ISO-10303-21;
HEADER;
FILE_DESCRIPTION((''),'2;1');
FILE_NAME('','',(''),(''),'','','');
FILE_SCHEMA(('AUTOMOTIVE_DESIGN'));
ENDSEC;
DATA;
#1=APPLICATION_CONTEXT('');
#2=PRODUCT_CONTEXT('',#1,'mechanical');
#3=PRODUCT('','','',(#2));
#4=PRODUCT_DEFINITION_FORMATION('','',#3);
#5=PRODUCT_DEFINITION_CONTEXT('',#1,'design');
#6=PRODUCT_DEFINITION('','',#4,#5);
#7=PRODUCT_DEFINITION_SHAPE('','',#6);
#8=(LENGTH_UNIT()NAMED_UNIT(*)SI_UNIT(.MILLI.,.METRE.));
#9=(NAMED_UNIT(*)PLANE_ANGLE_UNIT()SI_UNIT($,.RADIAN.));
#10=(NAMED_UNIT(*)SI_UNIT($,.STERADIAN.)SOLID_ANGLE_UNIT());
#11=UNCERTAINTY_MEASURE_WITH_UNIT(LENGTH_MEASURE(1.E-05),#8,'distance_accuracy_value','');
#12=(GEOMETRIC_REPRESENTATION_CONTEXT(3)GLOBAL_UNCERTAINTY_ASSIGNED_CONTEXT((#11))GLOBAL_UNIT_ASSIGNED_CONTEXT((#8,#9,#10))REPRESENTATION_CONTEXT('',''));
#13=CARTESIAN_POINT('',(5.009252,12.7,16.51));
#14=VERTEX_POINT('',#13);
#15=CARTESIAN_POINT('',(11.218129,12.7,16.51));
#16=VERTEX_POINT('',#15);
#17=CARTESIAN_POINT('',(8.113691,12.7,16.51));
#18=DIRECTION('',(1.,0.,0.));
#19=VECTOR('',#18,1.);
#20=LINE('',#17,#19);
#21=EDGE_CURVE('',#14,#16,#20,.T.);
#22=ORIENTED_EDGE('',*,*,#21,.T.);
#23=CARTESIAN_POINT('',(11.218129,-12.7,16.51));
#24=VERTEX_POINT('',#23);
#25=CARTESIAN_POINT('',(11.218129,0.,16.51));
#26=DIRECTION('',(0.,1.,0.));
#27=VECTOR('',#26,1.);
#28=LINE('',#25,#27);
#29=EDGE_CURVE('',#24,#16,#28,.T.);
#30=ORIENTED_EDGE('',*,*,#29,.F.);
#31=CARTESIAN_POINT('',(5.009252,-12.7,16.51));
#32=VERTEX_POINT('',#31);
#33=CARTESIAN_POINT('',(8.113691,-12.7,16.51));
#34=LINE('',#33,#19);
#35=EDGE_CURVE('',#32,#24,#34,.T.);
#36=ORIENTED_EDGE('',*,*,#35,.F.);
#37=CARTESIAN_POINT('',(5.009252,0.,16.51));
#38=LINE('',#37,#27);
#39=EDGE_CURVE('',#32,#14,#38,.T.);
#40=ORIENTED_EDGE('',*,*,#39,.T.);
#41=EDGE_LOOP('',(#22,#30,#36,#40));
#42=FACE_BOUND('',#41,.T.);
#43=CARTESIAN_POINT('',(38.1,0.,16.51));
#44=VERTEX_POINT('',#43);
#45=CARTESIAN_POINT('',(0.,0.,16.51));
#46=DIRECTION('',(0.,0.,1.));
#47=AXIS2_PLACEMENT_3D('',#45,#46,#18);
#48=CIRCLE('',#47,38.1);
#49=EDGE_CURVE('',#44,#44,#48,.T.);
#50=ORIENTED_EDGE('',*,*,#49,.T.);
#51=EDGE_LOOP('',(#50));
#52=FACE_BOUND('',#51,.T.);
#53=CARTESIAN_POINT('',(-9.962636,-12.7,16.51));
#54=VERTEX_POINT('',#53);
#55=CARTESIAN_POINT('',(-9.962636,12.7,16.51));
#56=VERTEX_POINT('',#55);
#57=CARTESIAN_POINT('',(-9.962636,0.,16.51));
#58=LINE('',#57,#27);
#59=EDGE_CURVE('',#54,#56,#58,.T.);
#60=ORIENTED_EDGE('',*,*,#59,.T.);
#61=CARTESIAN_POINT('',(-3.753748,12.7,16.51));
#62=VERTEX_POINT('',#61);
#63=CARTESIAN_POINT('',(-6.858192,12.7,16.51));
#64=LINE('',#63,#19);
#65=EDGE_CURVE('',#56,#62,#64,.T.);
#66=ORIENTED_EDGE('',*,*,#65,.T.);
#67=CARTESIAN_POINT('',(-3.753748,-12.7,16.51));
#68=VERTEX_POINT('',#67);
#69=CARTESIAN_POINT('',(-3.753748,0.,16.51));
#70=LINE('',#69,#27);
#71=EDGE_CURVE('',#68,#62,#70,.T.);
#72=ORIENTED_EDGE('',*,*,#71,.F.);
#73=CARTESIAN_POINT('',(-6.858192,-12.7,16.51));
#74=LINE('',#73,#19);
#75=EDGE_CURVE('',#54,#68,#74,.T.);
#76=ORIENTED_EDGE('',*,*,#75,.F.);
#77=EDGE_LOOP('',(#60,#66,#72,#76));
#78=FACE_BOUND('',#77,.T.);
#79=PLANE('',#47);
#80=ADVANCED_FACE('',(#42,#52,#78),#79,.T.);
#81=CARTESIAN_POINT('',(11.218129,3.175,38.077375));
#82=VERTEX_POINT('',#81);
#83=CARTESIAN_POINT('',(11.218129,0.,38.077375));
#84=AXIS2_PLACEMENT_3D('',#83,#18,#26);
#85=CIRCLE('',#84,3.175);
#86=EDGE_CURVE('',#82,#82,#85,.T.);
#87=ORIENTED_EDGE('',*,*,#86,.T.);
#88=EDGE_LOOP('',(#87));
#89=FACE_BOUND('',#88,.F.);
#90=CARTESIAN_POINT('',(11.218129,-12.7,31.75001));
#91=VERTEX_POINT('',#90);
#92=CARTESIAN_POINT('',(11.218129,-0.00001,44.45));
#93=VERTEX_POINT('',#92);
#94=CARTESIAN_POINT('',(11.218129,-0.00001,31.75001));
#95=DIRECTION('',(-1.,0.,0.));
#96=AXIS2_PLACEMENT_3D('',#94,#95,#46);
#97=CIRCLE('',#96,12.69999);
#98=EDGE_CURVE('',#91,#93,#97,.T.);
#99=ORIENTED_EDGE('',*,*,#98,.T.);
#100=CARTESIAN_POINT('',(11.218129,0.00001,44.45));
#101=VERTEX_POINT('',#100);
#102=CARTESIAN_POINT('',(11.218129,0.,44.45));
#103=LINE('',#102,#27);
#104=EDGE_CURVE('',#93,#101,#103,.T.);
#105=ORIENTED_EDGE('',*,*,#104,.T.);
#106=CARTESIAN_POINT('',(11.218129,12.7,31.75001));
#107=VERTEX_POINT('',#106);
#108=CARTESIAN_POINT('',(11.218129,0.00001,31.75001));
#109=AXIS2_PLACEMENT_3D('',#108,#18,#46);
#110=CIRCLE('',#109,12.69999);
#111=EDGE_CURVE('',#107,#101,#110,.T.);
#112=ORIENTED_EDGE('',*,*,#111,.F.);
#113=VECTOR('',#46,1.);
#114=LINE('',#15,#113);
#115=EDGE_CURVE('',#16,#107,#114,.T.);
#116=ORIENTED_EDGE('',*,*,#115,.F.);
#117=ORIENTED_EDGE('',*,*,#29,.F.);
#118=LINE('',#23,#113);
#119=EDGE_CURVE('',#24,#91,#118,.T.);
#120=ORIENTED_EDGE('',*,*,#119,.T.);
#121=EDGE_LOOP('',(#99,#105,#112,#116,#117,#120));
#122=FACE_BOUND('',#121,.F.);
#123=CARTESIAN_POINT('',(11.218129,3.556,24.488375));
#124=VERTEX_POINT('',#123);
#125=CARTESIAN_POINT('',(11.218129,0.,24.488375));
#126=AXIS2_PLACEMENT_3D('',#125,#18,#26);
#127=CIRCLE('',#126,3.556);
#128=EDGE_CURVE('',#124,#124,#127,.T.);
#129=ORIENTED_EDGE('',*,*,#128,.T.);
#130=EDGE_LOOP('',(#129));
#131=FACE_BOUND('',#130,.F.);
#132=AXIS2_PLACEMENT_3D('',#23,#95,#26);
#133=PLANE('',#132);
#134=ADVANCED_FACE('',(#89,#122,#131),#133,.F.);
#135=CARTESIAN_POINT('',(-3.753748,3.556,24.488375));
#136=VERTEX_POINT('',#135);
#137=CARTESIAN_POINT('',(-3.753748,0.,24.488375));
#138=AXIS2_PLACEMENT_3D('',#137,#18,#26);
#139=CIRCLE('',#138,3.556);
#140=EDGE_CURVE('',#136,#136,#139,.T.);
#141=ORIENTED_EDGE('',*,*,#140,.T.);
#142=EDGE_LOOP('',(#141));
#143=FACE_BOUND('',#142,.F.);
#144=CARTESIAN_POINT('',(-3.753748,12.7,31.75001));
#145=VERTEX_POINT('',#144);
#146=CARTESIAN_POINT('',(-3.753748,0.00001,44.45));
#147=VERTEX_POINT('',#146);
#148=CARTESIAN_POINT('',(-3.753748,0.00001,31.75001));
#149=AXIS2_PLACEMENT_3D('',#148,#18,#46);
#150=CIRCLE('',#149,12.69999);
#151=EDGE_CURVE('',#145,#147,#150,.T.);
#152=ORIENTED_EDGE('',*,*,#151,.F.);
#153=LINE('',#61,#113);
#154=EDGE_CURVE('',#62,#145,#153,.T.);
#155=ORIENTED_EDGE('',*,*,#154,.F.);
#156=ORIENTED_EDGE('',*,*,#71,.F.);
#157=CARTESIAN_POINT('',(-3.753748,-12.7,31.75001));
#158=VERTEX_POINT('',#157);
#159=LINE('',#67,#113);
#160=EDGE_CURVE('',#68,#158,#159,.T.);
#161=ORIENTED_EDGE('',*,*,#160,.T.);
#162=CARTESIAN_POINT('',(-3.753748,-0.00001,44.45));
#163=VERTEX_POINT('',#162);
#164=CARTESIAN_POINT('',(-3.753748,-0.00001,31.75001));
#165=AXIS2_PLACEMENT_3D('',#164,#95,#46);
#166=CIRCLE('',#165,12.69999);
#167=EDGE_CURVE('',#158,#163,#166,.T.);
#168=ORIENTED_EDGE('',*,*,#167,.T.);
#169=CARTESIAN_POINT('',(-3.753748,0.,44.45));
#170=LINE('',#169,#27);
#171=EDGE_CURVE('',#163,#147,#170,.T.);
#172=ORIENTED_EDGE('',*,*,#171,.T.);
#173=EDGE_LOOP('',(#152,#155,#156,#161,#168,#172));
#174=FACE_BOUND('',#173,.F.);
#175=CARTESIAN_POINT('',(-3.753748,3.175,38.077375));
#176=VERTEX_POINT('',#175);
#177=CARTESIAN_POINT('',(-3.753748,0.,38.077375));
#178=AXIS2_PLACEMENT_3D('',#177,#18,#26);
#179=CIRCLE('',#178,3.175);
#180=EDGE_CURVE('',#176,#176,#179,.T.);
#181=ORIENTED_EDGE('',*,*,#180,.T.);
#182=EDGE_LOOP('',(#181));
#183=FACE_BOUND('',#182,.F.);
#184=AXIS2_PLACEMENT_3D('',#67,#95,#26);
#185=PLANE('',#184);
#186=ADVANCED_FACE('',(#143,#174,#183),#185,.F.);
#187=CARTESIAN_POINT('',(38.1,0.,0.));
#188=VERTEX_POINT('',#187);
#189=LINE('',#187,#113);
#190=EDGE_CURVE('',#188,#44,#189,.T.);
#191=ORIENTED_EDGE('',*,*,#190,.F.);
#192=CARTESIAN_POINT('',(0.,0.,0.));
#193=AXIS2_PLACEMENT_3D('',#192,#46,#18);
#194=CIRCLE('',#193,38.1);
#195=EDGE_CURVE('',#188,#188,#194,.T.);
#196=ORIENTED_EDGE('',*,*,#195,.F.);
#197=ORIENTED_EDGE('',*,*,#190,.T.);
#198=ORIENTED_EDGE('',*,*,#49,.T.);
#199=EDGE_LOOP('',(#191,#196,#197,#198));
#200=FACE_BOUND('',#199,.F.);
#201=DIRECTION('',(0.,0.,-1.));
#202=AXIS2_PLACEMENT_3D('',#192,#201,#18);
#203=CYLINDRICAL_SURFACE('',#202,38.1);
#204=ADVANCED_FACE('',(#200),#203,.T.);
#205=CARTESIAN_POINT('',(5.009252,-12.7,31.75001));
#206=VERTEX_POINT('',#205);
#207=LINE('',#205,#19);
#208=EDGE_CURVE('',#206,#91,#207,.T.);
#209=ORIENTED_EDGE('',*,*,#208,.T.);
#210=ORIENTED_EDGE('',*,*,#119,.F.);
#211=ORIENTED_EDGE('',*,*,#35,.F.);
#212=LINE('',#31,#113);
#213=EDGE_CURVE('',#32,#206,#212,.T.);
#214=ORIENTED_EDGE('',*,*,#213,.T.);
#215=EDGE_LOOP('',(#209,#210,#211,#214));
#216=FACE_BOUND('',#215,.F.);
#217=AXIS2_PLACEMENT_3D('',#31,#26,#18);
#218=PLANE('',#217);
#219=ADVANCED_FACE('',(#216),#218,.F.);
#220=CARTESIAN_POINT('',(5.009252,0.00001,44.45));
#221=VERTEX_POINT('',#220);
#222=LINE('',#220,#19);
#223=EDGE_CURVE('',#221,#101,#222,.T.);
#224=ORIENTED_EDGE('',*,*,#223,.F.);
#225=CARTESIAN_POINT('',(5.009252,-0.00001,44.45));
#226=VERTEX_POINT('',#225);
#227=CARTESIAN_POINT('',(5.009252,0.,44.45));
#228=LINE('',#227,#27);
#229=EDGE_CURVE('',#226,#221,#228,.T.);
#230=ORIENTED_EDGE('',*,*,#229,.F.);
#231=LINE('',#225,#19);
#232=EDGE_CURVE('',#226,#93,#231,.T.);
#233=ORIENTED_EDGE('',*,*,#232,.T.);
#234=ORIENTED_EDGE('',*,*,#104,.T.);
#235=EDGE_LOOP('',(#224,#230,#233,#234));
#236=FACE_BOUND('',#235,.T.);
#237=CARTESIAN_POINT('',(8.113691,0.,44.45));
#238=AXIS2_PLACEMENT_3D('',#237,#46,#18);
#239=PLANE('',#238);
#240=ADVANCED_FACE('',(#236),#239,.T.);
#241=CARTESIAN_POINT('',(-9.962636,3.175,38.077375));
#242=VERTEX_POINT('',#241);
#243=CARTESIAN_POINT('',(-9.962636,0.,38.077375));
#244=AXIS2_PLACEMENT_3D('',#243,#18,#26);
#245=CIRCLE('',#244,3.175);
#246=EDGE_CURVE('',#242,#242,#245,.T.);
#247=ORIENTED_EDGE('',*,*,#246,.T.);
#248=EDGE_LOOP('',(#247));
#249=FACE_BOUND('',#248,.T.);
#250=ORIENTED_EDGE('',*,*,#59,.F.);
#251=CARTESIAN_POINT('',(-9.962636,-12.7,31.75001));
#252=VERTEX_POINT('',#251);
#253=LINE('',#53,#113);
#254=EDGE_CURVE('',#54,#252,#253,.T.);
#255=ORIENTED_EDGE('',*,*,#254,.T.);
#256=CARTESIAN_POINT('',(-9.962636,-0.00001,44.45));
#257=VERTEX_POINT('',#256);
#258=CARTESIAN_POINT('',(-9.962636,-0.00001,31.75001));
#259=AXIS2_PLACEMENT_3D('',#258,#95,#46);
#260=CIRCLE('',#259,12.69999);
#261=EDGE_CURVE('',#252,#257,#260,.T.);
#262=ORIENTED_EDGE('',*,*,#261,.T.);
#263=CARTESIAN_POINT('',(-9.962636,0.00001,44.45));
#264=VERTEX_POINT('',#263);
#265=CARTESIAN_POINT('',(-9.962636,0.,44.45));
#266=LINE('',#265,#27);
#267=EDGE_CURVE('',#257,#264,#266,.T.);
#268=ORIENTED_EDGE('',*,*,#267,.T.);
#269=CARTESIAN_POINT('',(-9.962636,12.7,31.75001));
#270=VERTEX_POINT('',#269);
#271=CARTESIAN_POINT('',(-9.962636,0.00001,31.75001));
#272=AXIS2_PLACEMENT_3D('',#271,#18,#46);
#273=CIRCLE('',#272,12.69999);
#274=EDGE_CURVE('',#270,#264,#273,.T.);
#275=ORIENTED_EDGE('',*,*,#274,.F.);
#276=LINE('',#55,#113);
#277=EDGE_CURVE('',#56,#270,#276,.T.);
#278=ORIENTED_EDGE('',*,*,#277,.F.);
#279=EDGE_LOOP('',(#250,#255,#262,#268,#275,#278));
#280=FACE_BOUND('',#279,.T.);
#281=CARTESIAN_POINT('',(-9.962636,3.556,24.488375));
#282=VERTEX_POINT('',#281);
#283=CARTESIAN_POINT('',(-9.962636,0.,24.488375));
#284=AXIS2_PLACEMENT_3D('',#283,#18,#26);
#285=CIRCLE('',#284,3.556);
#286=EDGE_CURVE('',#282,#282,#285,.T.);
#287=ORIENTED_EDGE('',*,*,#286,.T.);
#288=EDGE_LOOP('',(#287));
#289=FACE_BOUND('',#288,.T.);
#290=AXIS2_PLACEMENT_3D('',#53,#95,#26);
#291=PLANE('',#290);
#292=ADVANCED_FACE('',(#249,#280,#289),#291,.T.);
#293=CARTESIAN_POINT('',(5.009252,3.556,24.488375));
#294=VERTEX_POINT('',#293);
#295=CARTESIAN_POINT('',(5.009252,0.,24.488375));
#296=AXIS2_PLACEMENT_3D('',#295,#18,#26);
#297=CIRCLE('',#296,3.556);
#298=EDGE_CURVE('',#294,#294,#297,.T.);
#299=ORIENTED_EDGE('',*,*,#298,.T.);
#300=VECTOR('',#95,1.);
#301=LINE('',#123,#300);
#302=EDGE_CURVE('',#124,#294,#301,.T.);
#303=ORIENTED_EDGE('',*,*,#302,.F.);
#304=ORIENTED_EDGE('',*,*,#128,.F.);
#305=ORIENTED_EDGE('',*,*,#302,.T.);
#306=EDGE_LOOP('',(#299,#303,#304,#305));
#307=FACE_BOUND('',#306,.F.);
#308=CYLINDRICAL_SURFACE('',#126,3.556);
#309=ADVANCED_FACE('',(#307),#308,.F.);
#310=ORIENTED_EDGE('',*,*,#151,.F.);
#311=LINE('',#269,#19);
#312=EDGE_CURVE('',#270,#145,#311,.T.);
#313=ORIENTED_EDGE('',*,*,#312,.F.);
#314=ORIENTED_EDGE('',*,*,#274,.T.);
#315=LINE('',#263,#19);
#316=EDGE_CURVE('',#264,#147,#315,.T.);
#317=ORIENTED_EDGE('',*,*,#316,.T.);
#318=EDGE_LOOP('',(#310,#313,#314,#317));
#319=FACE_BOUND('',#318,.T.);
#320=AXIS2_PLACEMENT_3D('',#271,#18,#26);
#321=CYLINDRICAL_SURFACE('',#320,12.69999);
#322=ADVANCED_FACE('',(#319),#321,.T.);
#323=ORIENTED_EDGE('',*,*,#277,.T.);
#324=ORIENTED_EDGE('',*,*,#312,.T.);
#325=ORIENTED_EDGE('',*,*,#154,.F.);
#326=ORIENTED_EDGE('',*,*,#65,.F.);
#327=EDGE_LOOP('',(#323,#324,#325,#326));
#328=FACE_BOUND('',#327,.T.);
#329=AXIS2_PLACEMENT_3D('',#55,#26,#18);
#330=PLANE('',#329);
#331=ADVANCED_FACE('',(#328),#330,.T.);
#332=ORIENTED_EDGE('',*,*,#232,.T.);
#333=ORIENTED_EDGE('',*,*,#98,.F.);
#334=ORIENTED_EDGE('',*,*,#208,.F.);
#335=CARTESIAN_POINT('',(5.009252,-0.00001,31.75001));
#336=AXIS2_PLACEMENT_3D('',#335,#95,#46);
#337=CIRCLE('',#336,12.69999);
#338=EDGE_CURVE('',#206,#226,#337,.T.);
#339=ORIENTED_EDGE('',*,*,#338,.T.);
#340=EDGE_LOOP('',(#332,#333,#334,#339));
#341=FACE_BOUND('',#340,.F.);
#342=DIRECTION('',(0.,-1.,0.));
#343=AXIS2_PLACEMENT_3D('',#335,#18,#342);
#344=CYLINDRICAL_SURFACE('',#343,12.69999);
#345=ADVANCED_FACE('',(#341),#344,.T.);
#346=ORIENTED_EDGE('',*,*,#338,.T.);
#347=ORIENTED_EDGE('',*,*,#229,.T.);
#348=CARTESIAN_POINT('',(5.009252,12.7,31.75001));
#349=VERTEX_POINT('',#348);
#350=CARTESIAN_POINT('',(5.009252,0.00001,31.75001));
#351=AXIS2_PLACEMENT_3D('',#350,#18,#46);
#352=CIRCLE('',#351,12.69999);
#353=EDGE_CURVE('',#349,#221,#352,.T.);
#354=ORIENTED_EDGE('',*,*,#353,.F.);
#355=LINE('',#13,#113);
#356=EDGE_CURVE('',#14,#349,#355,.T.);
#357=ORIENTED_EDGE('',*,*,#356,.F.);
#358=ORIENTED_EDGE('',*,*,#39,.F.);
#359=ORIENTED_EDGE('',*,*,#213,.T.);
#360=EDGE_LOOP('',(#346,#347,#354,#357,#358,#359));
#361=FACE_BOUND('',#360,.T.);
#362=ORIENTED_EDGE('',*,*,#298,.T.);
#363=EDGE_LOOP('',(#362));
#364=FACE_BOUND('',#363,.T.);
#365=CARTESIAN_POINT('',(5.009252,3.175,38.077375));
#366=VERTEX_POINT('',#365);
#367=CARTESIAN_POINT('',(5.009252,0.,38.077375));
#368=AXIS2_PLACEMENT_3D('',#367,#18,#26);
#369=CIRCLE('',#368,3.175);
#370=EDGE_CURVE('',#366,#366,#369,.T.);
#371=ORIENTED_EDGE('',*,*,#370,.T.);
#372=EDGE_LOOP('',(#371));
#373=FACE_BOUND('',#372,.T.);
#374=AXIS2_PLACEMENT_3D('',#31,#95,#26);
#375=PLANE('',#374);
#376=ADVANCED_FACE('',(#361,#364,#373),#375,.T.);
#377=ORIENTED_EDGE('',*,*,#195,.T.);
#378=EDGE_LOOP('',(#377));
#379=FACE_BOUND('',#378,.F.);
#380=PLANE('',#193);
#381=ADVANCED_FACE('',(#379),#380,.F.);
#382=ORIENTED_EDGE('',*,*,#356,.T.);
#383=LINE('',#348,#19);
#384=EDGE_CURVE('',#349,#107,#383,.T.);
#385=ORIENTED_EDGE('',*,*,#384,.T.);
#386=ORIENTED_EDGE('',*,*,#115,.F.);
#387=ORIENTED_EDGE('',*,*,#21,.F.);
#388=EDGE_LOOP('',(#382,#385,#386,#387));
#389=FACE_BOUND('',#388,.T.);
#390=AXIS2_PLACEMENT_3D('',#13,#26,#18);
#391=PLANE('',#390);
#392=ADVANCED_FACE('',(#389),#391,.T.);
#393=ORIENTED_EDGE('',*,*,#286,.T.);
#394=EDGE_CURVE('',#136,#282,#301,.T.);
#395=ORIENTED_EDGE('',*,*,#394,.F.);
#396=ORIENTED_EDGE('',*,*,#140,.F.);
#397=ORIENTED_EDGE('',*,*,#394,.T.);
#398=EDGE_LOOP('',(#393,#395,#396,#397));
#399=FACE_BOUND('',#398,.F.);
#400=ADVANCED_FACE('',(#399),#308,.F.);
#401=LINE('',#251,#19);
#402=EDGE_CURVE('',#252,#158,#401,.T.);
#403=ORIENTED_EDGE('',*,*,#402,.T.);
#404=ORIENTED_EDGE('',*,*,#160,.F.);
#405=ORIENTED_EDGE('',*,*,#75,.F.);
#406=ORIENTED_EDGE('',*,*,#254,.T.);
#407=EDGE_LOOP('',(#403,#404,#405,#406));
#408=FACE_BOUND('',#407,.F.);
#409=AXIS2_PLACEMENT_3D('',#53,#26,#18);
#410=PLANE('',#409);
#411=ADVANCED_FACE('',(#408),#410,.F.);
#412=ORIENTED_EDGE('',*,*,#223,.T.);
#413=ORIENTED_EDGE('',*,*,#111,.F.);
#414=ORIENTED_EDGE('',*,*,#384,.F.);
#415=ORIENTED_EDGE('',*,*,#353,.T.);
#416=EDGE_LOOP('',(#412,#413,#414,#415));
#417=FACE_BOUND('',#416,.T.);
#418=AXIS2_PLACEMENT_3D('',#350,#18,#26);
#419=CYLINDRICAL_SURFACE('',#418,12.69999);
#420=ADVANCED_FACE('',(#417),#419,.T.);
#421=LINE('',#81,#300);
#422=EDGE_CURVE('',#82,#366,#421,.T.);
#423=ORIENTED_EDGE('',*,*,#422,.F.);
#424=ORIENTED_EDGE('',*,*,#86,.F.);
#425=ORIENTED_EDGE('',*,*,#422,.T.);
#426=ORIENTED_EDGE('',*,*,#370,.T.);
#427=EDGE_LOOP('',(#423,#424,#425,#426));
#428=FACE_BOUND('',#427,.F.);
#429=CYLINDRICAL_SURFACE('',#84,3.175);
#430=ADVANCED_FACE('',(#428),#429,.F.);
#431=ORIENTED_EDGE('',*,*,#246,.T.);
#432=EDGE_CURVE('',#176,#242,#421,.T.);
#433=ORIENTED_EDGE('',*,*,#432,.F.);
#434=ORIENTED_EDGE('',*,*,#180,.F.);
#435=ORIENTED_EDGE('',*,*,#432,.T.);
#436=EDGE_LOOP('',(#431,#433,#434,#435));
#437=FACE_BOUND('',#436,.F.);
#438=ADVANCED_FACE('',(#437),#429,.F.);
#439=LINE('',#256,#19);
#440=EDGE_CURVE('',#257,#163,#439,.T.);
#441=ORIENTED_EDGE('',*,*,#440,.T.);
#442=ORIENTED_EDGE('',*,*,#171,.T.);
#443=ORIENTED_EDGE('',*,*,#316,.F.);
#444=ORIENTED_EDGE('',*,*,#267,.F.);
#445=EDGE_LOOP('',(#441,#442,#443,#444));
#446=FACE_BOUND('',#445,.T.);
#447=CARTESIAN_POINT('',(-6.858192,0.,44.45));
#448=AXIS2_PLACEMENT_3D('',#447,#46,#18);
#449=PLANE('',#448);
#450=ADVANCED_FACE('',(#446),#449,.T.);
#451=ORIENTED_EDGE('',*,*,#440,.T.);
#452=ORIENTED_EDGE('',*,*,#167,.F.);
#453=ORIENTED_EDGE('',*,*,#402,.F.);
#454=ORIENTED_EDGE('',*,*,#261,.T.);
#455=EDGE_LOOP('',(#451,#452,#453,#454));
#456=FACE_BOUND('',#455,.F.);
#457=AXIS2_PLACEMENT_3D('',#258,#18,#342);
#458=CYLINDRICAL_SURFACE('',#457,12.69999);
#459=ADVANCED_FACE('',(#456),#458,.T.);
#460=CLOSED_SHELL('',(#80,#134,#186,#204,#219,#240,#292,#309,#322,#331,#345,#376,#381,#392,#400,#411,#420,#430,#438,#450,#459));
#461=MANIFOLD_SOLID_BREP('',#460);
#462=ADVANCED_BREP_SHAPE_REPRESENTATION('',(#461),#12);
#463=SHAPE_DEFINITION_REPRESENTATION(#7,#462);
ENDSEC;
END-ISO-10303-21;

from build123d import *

# Parameters (mm, degrees)
F0_R     = 38.1
F1_DEPTH = 16.51
F2_W     = 6.20888776
F2_H     = 25.4
F2_W_2   = 6.2088776
F3_DEPTH = 27.94
F4_R     = 12.69999
F5_R     = 3.556
F5_R_2   = 3.175
F6_DEPTH = 49.319129452


# Not quite as in the source:
# - a fillet or chamfer is up to 0.001 mm smaller than in the source, because OpenCascade refuses the exact size


with BuildPart() as f1:
    # F0 (on Top) → F1 (new body)
    with BuildSketch(Plane.XY):
        Circle(F0_R)
    extrude(amount=F1_DEPTH)

    # F2 (on face) → F3 (join)
    with BuildSketch(Plane.XY.offset(16.51)):
        with Locations((-6.858192028, 0)):
            Rectangle(F2_W, F2_H)
        with Locations((8.113690652, 0)):
            Rectangle(F2_W_2, F2_H)
    extrude(amount=F3_DEPTH)

    # F4 (radius 12.7 in the source; OpenCascade refuses exactly that, so slightly less here)
    f4_edges = [f1.edges().sort_by_distance(p)[0] for p in [
        (-6.858192, 12.7, 44.45),
        (-6.858192, -12.7, 44.45),
        (8.113691, -12.7, 44.45),
        (8.113691, 12.7, 44.45),
    ]]
    fillet(f4_edges, radius=F4_R)

    # F5 (on face) → F6 (cut, through all)
    with BuildSketch(Plane.YZ.offset(11.218129452)):
        with Locations((0, 24.4883745909)):
            Circle(F5_R)
        with Locations((0, 38.0773745909)):
            Circle(F5_R_2)
    extrude(amount=-F6_DEPTH, mode=Mode.SUBTRACT)


solid = f1.part
